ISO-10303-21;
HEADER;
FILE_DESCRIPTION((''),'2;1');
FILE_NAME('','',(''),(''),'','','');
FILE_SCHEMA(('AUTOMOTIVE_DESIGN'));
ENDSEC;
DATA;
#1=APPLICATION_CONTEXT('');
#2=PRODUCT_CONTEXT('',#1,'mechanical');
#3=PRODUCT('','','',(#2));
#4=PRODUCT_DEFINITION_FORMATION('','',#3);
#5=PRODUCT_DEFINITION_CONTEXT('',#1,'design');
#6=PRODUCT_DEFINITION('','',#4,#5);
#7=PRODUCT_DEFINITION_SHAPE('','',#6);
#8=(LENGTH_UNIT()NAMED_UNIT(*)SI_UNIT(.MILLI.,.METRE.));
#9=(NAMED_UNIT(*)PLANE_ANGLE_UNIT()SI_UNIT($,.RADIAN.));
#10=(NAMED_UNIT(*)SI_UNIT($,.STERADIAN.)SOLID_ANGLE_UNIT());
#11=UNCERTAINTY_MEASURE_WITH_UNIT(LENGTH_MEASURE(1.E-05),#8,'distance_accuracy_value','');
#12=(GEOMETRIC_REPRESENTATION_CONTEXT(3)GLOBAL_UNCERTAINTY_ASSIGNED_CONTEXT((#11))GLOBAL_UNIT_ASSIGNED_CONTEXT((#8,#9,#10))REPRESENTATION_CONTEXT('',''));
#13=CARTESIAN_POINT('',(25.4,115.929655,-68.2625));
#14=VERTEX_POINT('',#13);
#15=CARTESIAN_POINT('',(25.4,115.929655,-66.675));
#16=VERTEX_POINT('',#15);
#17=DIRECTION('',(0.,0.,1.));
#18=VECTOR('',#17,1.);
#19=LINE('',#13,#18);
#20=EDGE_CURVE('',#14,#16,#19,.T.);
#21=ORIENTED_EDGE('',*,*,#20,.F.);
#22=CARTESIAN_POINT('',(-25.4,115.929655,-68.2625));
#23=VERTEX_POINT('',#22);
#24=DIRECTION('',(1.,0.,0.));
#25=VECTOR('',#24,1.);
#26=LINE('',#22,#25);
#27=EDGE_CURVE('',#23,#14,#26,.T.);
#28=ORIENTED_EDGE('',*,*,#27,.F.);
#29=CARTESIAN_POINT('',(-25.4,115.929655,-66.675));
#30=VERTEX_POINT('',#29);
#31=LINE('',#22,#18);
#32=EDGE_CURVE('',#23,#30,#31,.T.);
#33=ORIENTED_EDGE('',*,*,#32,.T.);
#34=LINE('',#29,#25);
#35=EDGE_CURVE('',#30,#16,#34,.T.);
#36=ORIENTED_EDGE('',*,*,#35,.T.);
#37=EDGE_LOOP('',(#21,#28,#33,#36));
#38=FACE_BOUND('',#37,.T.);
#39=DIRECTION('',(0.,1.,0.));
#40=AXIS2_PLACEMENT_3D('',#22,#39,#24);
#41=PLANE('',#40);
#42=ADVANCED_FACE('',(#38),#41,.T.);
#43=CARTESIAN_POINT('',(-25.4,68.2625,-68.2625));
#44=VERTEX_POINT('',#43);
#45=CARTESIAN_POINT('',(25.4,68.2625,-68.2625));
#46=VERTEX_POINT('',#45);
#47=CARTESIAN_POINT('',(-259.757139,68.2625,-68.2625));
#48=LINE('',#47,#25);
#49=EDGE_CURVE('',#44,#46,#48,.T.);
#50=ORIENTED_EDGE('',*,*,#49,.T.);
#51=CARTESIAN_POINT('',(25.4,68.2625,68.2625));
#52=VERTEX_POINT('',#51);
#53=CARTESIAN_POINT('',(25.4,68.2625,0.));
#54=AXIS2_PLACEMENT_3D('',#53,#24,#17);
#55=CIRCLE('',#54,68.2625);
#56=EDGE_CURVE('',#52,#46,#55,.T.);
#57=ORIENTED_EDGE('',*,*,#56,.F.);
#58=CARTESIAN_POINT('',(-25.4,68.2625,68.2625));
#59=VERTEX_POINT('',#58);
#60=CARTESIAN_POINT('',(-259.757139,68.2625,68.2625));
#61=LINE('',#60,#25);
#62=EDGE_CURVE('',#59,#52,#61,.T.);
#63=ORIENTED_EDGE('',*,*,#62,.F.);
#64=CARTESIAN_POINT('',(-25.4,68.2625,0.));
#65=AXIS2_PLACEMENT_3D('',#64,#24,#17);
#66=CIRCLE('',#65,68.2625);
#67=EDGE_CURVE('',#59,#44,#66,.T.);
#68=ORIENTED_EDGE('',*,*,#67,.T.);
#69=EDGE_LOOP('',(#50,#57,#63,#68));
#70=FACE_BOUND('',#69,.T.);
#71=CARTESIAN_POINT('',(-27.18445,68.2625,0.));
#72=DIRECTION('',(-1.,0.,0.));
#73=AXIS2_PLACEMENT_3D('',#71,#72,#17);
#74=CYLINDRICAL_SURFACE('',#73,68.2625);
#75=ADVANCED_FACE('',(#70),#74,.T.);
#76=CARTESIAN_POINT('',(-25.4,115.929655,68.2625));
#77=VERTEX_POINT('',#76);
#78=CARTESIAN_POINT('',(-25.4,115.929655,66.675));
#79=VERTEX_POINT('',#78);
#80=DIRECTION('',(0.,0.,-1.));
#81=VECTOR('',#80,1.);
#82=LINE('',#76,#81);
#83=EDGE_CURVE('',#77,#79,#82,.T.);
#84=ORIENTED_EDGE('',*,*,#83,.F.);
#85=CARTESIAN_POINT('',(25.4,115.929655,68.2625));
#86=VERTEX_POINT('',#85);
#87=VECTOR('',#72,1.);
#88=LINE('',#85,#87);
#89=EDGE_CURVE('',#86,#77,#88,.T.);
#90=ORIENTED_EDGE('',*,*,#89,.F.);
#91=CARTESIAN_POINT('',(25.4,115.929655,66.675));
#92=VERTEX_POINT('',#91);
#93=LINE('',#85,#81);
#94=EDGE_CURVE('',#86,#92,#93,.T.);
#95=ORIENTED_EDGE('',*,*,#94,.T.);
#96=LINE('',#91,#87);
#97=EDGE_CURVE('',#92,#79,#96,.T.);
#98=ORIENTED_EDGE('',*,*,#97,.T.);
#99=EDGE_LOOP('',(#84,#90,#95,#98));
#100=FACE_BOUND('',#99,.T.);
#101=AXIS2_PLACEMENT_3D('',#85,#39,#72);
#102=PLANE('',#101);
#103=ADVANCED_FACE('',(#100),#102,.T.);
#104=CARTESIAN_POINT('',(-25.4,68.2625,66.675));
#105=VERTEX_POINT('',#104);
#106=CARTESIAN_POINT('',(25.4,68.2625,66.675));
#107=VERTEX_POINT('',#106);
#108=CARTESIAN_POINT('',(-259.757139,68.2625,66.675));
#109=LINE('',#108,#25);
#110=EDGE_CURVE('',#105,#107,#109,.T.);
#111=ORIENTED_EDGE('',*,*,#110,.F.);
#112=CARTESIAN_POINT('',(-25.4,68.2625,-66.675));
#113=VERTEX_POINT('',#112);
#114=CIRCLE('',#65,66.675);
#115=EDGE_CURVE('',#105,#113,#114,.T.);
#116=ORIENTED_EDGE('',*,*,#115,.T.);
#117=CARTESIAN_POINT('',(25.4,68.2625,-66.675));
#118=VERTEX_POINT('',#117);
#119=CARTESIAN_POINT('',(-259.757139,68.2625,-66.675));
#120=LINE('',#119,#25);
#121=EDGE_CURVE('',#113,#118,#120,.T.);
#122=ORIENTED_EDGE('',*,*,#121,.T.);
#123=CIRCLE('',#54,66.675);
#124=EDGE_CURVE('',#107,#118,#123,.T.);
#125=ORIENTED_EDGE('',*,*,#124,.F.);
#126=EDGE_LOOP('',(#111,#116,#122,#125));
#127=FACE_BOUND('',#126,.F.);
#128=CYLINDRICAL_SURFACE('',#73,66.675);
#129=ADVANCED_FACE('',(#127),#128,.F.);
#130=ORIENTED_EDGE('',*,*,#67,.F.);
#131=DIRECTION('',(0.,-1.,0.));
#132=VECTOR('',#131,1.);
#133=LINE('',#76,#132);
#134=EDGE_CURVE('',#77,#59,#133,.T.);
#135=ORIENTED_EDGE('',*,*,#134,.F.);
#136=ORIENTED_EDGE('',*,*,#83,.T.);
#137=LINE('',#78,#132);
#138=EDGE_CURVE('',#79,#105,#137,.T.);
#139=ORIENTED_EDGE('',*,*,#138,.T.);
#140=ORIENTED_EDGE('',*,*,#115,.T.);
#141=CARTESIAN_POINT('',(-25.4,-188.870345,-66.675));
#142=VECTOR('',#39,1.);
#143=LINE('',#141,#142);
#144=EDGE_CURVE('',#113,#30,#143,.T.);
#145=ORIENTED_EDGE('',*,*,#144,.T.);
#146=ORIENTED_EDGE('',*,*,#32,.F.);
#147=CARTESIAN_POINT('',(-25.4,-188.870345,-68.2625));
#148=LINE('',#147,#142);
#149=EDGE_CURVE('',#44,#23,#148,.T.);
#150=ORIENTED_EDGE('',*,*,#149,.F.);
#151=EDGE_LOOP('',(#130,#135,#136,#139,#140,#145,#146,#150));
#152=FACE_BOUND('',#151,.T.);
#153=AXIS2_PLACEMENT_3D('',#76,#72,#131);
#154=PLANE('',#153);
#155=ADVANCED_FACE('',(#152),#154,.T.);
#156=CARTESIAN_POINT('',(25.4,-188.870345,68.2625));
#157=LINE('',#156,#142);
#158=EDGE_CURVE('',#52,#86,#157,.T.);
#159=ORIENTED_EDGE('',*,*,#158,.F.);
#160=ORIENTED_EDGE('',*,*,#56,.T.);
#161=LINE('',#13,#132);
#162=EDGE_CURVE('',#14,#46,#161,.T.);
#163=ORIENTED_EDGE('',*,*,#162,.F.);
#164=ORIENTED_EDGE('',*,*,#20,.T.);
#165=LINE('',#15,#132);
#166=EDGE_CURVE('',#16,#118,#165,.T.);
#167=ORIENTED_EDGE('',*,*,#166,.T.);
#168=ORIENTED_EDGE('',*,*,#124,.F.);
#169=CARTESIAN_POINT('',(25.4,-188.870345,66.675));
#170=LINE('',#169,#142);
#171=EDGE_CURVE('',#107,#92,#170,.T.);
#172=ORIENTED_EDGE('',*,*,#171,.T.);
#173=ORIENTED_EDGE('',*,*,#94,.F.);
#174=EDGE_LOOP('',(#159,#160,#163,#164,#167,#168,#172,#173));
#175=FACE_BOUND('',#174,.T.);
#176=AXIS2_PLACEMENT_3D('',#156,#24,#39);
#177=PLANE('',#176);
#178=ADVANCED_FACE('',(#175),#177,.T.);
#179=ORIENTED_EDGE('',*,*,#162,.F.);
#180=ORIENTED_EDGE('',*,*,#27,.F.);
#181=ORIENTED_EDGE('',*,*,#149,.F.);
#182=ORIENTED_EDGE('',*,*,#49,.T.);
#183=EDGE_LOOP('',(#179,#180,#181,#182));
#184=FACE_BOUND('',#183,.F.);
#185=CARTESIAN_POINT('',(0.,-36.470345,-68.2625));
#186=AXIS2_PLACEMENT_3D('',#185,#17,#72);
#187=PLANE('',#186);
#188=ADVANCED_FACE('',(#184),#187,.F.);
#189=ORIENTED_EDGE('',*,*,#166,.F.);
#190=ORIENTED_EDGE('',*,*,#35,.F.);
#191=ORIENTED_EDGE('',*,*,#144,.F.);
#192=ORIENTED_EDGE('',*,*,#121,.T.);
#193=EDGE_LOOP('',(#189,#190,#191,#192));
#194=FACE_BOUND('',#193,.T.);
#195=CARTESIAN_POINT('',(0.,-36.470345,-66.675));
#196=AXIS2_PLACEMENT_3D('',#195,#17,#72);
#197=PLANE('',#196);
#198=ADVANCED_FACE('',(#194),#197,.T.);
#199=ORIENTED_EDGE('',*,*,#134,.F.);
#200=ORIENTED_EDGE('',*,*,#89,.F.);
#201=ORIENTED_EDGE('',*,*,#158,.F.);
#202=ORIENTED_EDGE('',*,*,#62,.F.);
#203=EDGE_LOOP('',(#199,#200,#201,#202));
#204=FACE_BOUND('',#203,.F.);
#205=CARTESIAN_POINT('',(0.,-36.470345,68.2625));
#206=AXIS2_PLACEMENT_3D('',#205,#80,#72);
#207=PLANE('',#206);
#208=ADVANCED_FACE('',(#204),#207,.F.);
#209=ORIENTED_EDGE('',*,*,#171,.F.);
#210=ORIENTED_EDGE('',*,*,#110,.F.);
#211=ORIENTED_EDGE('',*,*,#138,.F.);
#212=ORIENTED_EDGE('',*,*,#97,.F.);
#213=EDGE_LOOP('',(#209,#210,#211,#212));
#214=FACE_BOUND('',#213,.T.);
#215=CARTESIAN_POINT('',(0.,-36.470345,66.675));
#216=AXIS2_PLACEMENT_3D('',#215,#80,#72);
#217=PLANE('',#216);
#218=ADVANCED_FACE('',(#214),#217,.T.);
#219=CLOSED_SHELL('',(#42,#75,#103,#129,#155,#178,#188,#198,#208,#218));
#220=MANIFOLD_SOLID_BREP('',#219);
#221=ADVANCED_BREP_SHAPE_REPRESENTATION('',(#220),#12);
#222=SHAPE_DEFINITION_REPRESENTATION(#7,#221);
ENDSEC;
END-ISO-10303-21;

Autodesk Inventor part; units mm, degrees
ref_plane "YZ Plane" through (0, 0, 0) normal (1, 0, 0) x (0, 1, 0)
ref_plane "XZ Plane" through (0, 0, 0) normal (0, 1, 0) x (-1, 0, 0)
ref_plane "XY Plane" through (0, 0, 0) normal (0, 0, 1) x (1, 0, 0)
sketch "Sketch1" plane through (0, 0, 0) normal (0, 1, 0) x (-1, 0, 0)
  line L0 (25.4, -152.4) -> (-25.4, -152.4)
  line L1 (-25.4, -152.4) -> (-25.4, 152.4)
  line L2 (-25.4, 152.4) -> (25.4, 152.4)
  line L3 (25.4, 152.4) -> (25.4, -152.4)
  line L4 (25.4, -152.4) -> (-25.4, 152.4) construction
  line L5 (-25.4, -152.4) -> (25.4, 152.4) construction
  point P0 (0, 0)
  dimension "d0" = 50.8
  dimension "d1" = 304.8
extrude "Extrusion1" add sketch "Sketch1" along normal blind 1.5875
sketch "Sketch2" plane through (0, 1.5875, 0) normal (0, 1, 0) x (1, 0, 0)
  line L0 (25.4, -152.4) -> (25.4, 152.4) projected
  line L1 (-54.3689, 0) -> (59.0967, 0)
  line L2 (-25.4, -152.4) -> (25.4, 152.4) construction
  line L3 (-25.4, 152.4) -> (25.4, -152.4) construction
  point P0 (0, 0)
  point P1 (0, 0)
bend part "Bend Part1" radius 66.675 angle 180 line through (-54.3689, 1.5875, 0) along (1, 0, 0) centre toward (0, 1, 0) moving side (0, 0, -1) both sides yes
properties part number "side" material "Polycarbonate, Clear"
